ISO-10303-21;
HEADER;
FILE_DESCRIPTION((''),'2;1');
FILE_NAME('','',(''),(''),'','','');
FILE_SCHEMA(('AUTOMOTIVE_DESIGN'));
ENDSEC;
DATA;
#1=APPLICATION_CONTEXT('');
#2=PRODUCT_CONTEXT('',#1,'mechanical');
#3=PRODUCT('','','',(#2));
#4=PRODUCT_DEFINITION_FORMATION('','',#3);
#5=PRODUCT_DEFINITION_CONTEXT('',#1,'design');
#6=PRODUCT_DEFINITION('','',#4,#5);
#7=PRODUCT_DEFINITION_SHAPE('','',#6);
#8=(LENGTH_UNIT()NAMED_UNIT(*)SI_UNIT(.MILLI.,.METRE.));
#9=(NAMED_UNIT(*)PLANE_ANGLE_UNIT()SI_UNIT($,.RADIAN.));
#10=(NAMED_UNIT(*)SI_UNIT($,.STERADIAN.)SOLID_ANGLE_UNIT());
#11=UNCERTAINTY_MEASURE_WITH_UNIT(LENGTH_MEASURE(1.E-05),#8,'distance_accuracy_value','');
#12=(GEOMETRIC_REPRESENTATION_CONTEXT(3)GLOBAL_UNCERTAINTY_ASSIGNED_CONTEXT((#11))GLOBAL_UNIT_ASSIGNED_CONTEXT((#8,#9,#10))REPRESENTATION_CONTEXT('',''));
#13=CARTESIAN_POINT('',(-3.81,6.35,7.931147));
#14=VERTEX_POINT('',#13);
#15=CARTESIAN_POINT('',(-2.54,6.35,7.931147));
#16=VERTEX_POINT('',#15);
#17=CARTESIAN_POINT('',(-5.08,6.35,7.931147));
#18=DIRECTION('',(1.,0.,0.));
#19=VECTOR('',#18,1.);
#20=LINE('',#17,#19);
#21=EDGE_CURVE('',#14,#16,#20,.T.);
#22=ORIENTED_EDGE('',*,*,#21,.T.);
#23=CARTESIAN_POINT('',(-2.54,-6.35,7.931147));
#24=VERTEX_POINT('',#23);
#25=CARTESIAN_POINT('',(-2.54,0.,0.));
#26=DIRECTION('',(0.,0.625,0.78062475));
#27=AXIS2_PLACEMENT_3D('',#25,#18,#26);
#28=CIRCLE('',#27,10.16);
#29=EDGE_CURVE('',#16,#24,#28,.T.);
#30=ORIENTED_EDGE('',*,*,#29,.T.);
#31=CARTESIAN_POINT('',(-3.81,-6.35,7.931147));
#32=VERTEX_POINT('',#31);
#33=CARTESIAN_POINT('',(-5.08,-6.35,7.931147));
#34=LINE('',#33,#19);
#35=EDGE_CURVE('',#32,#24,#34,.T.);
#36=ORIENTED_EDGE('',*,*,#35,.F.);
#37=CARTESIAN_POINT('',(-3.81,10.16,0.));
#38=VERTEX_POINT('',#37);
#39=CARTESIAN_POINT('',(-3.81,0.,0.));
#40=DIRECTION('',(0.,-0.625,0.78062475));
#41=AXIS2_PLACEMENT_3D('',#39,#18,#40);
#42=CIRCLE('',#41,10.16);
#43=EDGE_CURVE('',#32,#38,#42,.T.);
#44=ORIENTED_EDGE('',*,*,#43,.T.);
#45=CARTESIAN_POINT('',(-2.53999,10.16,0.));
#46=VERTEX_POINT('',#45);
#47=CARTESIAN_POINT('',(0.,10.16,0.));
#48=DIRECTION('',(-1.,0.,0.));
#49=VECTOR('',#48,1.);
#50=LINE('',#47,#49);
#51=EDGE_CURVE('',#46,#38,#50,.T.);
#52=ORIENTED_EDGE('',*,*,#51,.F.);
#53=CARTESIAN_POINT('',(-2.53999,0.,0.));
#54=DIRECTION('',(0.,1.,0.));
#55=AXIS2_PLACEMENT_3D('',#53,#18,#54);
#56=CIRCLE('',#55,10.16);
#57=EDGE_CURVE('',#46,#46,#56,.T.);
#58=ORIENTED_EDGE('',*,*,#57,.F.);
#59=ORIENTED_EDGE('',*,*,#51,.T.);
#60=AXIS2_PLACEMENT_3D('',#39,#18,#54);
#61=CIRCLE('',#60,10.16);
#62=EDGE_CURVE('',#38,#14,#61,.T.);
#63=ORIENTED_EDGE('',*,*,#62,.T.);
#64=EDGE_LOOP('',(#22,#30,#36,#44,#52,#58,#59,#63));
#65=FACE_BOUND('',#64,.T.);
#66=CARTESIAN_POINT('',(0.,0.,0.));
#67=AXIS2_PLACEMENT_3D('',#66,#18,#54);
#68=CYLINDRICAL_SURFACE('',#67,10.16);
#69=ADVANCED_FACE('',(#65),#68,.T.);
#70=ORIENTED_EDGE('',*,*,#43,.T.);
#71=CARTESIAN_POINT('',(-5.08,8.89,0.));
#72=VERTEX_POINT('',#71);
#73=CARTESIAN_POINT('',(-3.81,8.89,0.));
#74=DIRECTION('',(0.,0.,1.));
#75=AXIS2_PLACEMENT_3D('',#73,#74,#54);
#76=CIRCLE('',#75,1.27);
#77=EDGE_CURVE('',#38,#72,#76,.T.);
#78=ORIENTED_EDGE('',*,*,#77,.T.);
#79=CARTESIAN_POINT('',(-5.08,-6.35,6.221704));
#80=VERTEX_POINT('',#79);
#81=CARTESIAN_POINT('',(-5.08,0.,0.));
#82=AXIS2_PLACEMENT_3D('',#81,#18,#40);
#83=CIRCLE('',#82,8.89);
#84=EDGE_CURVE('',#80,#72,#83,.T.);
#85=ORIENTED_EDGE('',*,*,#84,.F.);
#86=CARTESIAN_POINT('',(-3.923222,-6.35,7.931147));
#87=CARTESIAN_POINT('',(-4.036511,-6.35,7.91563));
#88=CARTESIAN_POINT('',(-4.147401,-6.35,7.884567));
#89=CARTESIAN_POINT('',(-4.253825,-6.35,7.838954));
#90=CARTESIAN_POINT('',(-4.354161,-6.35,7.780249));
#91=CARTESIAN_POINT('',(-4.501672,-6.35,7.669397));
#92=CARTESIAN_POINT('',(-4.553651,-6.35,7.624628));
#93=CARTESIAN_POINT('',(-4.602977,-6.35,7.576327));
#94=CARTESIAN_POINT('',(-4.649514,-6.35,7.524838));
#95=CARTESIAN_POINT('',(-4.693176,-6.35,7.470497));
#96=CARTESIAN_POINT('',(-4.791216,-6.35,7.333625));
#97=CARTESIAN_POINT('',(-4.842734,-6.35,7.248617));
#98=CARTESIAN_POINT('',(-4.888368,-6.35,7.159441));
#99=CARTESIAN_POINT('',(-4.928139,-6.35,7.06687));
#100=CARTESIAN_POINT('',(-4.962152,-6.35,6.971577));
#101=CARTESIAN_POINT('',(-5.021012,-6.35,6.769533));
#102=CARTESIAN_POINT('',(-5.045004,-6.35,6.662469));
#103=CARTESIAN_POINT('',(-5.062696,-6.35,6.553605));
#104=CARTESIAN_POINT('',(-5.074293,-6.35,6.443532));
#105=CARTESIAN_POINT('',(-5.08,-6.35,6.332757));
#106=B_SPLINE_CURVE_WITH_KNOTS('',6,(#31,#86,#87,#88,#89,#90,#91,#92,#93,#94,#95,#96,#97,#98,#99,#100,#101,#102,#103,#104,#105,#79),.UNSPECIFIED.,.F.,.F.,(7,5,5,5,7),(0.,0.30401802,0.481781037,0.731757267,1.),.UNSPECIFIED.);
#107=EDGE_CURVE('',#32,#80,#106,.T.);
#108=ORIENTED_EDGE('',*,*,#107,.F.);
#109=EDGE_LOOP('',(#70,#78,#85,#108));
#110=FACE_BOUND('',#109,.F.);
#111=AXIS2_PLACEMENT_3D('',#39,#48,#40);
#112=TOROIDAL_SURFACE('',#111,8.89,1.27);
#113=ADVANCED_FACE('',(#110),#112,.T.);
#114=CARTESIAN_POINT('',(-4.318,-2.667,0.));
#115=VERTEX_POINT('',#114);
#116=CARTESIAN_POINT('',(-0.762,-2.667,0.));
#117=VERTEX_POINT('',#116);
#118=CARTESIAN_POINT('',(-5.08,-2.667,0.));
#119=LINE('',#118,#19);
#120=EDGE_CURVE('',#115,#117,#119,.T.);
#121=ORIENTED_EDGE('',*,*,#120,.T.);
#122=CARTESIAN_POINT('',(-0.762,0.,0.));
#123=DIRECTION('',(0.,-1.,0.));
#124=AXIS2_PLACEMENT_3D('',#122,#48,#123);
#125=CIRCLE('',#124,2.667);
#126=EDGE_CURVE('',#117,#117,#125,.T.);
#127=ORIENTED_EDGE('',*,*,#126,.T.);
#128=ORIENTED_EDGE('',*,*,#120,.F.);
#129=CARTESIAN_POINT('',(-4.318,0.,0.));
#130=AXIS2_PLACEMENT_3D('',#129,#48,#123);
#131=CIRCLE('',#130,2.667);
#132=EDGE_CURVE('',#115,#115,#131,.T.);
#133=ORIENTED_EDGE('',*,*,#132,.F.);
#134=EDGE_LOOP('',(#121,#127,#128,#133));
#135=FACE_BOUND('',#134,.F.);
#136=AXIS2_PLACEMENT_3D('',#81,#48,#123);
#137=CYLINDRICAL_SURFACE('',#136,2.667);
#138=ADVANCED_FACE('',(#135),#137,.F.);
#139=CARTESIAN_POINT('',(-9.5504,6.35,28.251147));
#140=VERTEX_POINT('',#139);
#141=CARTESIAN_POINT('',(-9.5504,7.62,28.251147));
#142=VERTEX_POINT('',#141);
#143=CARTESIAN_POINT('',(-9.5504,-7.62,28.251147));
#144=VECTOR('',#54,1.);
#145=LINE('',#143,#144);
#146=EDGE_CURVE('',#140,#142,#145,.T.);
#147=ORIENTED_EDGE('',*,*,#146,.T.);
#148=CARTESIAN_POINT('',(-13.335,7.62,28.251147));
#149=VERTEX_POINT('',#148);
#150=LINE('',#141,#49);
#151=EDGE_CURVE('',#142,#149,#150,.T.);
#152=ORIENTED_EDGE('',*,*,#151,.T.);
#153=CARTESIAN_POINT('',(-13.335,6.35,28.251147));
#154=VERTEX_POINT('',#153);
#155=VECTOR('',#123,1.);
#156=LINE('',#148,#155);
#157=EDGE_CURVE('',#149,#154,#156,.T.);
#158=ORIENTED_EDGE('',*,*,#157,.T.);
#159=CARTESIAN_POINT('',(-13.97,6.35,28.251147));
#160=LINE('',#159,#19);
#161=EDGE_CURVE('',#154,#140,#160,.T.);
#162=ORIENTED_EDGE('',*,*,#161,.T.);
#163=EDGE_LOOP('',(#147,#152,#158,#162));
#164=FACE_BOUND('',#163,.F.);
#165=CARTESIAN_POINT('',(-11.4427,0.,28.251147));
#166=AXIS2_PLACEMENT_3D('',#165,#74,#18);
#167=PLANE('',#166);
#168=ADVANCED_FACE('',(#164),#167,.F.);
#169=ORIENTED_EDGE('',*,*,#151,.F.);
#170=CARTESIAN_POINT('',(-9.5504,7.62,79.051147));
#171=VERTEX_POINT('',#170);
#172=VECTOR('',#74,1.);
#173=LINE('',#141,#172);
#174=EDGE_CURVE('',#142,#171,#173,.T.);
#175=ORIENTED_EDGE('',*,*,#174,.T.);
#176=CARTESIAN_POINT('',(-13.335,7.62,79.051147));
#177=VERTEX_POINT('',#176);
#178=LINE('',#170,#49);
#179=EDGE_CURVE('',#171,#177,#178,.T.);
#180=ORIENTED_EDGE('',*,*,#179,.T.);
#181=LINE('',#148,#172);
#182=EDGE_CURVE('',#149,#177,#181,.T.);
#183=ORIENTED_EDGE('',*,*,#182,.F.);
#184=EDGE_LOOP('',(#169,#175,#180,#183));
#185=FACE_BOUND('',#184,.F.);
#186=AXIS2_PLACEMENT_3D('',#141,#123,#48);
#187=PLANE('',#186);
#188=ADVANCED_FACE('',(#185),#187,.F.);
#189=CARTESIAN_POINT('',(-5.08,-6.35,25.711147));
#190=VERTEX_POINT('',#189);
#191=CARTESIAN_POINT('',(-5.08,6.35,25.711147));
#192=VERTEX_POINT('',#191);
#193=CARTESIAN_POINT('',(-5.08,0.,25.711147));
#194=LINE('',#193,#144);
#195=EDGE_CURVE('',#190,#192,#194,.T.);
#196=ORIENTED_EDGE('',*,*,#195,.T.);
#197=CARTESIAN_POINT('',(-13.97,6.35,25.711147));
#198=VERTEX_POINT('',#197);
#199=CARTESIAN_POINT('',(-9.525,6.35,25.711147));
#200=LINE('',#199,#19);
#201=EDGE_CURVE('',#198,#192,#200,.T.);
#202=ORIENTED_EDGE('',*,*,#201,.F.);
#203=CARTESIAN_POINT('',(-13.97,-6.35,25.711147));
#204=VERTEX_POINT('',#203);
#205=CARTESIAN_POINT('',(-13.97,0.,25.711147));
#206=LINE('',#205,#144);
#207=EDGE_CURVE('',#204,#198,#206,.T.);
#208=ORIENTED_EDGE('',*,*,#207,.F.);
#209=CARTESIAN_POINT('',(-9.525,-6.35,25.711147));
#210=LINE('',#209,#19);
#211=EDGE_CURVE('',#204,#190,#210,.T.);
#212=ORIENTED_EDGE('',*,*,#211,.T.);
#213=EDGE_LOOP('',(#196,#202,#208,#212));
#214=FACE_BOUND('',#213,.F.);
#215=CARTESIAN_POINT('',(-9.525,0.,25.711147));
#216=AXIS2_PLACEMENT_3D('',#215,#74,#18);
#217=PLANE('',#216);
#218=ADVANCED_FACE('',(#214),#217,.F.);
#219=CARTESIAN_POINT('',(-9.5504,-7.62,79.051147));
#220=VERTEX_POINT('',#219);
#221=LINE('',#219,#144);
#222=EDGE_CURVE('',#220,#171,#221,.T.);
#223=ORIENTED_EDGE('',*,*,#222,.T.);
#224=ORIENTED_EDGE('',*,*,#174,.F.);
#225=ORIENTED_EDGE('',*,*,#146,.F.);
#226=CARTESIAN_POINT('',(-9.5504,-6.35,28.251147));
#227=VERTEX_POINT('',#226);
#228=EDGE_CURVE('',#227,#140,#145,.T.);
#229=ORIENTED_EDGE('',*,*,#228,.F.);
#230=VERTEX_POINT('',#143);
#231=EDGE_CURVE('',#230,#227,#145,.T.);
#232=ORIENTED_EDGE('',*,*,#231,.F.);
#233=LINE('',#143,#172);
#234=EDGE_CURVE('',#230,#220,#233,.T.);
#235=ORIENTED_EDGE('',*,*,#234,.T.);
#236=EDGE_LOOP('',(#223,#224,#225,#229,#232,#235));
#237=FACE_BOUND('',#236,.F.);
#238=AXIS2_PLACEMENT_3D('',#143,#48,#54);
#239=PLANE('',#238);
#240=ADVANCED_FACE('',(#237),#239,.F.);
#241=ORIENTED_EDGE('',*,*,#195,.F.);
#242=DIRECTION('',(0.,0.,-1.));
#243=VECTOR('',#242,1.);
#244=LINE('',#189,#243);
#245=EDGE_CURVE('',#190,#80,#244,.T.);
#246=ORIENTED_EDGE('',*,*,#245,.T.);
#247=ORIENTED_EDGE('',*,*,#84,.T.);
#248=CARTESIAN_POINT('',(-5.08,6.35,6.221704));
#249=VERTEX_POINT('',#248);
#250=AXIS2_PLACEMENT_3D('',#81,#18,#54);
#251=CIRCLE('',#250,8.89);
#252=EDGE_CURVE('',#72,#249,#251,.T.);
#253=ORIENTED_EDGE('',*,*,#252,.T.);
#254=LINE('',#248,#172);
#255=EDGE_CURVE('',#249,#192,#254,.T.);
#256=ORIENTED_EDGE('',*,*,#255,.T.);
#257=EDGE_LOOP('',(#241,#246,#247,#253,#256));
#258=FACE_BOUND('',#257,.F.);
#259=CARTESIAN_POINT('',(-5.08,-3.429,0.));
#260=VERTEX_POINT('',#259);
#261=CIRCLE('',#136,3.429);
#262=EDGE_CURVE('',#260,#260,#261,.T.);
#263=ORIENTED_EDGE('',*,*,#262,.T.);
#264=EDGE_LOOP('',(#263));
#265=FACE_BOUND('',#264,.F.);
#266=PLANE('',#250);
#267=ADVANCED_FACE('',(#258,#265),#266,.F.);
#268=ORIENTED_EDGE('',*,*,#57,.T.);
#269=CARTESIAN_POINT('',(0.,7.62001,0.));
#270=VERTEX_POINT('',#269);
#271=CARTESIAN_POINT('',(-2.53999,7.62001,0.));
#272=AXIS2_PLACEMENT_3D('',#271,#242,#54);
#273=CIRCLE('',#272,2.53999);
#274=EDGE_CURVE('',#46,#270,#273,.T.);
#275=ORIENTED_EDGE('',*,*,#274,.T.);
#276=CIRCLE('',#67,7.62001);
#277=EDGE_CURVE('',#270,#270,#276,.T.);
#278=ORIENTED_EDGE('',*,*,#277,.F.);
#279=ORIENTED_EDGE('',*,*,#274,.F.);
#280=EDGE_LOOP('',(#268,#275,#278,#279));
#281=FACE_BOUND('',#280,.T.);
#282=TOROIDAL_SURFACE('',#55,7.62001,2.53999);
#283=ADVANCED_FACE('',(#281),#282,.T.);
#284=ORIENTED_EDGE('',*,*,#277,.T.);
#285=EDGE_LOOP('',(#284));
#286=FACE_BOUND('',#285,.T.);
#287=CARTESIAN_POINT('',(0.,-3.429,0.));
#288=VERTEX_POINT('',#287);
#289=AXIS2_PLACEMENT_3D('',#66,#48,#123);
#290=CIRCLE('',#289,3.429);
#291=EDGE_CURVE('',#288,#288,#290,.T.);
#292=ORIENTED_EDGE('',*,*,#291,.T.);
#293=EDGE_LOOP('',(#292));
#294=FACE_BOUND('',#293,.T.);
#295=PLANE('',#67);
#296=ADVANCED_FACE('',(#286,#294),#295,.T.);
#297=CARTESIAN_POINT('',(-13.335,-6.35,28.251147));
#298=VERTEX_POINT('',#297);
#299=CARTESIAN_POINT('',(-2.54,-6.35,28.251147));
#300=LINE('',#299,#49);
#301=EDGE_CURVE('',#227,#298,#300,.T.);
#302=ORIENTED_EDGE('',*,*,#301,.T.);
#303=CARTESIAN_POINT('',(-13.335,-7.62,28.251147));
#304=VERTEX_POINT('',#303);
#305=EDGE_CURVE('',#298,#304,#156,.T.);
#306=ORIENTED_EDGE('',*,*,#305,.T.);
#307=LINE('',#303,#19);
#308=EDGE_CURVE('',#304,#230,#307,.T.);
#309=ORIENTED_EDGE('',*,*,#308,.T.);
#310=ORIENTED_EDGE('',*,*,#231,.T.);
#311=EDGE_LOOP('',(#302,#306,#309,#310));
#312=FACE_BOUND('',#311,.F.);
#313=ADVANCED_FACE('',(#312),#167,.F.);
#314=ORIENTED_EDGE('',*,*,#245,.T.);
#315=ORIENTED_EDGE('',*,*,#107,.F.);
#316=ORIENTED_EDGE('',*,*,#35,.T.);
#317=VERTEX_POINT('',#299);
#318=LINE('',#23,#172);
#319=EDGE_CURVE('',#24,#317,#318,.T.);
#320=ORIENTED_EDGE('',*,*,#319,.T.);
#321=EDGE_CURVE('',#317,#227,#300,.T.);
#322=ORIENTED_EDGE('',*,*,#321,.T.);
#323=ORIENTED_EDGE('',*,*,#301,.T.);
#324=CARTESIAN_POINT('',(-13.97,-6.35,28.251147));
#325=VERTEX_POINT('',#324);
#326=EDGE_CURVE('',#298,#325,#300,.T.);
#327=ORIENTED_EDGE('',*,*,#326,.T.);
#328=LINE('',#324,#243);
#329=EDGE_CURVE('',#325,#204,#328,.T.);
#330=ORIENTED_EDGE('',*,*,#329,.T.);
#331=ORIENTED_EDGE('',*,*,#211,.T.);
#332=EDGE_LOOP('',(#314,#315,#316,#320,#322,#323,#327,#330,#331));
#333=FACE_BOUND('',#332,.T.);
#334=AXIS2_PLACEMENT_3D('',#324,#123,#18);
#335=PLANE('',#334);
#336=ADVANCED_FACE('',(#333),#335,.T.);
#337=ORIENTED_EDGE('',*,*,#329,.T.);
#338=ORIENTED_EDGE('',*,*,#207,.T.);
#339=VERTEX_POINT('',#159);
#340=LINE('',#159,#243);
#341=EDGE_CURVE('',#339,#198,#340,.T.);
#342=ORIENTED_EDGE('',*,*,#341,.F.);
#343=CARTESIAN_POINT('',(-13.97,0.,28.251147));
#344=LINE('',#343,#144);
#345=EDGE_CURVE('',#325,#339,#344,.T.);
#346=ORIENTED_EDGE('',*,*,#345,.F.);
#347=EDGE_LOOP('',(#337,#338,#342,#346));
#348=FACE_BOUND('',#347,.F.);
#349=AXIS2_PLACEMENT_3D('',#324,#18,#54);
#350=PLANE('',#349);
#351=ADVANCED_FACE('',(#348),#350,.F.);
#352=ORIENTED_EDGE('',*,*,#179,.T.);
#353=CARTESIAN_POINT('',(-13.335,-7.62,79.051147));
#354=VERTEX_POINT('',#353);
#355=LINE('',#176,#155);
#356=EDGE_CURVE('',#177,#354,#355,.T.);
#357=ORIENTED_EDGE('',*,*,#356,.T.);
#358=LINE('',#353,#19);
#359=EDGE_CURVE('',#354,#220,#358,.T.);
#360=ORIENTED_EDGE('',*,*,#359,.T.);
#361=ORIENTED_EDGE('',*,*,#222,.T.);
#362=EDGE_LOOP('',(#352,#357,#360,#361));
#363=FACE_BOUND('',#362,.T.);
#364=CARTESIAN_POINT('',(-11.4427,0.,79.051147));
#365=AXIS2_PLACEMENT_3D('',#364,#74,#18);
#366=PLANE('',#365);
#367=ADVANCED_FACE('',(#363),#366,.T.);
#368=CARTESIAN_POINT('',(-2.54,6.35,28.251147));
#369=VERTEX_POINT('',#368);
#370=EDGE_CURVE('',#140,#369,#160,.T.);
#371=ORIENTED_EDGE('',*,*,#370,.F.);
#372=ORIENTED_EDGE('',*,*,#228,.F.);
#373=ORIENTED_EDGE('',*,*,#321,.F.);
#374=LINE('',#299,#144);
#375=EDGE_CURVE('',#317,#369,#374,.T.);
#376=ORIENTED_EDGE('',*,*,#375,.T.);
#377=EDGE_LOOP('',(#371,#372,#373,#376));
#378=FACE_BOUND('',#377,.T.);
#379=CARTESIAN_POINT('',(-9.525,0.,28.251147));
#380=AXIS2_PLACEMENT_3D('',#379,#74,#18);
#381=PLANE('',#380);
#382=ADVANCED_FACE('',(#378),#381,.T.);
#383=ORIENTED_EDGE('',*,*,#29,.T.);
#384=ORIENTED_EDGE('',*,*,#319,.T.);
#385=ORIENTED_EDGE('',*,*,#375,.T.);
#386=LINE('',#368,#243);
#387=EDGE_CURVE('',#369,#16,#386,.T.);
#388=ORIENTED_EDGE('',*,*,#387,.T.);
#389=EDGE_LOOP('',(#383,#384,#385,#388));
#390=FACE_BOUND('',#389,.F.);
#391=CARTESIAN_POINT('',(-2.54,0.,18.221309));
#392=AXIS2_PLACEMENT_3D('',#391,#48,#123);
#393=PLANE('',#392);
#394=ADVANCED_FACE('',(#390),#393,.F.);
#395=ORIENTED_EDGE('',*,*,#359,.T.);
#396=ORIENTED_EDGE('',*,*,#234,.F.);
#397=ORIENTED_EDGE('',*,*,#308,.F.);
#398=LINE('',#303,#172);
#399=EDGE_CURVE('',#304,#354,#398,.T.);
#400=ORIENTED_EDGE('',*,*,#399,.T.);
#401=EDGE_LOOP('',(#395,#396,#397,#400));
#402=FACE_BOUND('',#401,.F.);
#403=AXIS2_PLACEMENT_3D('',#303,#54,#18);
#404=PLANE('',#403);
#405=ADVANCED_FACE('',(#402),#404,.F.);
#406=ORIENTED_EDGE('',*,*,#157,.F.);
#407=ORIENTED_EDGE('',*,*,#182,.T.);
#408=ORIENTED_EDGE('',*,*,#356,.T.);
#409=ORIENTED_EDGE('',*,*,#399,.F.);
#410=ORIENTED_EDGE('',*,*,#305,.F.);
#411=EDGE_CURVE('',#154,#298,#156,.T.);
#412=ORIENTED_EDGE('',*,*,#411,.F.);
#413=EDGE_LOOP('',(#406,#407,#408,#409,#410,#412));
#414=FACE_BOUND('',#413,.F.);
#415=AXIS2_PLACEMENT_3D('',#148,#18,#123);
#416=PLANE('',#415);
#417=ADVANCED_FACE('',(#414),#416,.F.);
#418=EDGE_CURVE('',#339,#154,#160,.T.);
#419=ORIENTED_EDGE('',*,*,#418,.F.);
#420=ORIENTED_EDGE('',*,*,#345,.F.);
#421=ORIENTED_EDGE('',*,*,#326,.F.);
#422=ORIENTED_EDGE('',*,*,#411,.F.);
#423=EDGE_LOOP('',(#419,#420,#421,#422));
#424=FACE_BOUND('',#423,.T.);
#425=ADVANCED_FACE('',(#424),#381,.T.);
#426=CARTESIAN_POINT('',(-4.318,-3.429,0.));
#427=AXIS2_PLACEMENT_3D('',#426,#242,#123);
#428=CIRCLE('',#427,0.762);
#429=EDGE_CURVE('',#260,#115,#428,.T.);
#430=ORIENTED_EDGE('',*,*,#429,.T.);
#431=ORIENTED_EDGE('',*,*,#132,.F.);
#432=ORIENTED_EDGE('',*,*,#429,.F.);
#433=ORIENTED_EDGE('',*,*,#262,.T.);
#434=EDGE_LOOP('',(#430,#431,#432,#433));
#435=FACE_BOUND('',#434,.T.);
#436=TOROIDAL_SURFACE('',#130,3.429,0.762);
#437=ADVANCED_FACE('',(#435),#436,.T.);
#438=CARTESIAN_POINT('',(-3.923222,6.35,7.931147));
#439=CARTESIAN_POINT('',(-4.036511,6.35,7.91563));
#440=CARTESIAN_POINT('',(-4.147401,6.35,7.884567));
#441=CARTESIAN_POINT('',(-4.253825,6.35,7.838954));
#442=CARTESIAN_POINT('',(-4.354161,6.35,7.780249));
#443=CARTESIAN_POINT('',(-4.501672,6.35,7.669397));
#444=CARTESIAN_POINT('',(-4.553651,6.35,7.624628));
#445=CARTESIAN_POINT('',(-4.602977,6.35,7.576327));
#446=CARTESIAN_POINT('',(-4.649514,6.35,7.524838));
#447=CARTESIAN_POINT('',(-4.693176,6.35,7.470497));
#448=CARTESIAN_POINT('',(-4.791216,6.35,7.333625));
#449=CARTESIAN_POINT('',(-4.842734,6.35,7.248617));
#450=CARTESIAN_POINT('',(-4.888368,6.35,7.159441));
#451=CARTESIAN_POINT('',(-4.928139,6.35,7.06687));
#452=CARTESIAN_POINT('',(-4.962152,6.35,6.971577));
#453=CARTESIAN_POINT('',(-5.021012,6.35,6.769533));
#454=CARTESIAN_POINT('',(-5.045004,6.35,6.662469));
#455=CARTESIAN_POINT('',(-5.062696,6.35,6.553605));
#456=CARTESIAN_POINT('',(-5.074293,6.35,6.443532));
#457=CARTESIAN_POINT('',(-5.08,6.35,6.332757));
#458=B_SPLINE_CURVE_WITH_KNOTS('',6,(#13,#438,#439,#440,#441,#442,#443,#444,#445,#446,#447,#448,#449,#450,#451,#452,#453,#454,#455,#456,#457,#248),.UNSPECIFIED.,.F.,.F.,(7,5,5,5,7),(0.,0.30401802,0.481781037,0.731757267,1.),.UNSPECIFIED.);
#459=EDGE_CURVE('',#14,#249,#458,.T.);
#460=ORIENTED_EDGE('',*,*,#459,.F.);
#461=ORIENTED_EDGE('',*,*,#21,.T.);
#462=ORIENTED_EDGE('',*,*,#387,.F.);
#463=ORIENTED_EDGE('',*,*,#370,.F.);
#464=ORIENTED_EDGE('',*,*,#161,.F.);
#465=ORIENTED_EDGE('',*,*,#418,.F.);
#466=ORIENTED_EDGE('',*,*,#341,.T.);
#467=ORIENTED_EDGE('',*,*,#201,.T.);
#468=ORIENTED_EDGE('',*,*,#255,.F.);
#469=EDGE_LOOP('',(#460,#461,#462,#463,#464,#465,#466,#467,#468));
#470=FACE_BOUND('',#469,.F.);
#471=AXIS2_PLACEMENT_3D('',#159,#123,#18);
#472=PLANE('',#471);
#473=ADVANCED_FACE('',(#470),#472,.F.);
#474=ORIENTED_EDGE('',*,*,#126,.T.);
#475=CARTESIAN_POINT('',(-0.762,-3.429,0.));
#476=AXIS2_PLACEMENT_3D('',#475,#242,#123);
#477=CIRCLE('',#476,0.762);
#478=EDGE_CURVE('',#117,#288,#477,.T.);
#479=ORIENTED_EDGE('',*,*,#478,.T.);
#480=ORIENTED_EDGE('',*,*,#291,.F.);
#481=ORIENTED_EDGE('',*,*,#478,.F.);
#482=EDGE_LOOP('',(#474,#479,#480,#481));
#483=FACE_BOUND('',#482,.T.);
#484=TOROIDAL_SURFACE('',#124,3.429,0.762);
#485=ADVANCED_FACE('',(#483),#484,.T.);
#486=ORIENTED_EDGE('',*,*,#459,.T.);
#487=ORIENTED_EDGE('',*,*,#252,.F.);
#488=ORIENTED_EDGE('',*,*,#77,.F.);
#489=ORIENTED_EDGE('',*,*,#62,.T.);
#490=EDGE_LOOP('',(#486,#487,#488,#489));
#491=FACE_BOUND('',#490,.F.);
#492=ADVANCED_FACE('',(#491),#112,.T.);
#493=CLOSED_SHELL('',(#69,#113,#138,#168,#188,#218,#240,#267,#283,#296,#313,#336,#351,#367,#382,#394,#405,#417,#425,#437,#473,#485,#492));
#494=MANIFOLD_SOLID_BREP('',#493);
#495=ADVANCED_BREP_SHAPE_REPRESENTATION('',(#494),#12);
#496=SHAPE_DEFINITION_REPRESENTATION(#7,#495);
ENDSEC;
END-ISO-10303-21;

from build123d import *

# Parameters (mm, degrees)
F0_R      = 10.16
F1_DEPTH  = 2.54
F2_R      = 2.667
F3_DEPTH  = 26.02296
F4_R      = 10.16
F5_DEPTH  = 5.08
F7_R      = 2.667
F8_DEPTH  = 61.29661
F9_DEPTH  = 2.54
F10_W     = 8.89
F10_H     = 12.7
F11_DEPTH = 2.54
F13_DEPTH = 50.8
F14_R     = 2.53999
F15_R     = 1.27
F16_R     = 0.762


# Not quite as in the source:
# - a fillet or chamfer is up to 0.001 mm smaller than in the source, because OpenCascade refuses the exact size


with BuildPart() as f1:
    # F0 (on Right) → F1 (new body)
    with BuildSketch(Plane.YZ):
        Circle(F0_R)
    extrude(amount=-F1_DEPTH)

    # F2 (on face) → F3 (cut)
    with BuildSketch(Plane(origin=(-2.54, 0, 0), x_dir=(0, -1, 0), z_dir=(-1, 0, 0))):
        Circle(F2_R)
    extrude(amount=-F3_DEPTH, mode=Mode.SUBTRACT)

    # F4 (on Right) → F5 (join)
    with BuildSketch(Plane.YZ):
        Circle(F4_R)
    extrude(amount=-F5_DEPTH)

    # F7 (on face) → F8 (cut)
    with BuildSketch(Plane(origin=(-5.08, 0, 0), x_dir=(0, -1, 0), z_dir=(-1, 0, 0))):
        Circle(F7_R)
    extrude(amount=-F8_DEPTH, mode=Mode.SUBTRACT)

    # F6 (on face) → F9 (join)
    with BuildSketch(Plane(origin=(-5.08, 0, 0), x_dir=(0, -1, 0), z_dir=(-1, 0, 0))):
        with BuildLine():
            Line((-6.35, 28.251147458), (-6.35, 7.931147458))
            ThreePointArc((-6.35, 7.931147458), (0, 10.16), (6.35, 7.931147458))
            Line((6.35, 7.931147458), (6.35, 28.251147458))
            Line((6.35, 28.251147458), (-6.35, 28.251147458))
        make_face()
    extrude(amount=-F9_DEPTH)

    # F10 (on face) → F11 (join)
    with BuildSketch(Plane.XY.offset(28.251147458)):
        with Locations((-9.525, 0)):
            Rectangle(F10_W, F10_H)
    extrude(amount=-F11_DEPTH)

    # F12 (on face) → F13 (join)
    with BuildSketch(Plane.XY.offset(28.251147458)):
        Polygon((-9.5504, 7.62), (-13.335, 7.62), (-13.335, -7.62), (-9.5504, -7.62), (-9.5504, 0), align=None)
    extrude(amount=F13_DEPTH)

    # F14 (radius 2.54 in the source; OpenCascade refuses exactly that, so slightly less here)
    f14_edges = [f1.edges().sort_by_distance(p)[0] for p in [
        (0, -10.16, 0),
    ]]
    fillet(f14_edges, radius=F14_R)

    # F15
    f15_edges = [f1.edges().sort_by_distance(p)[0] for p in [
        (-5.08, -4.399409, -9.1581),
    ]]
    fillet(f15_edges, radius=F15_R)

    # F16
    f16_edges = [f1.edges().sort_by_distance(p)[0] for p in [
        (-5.08, 2.667, 0),
        (0, 2.667, 0),
    ]]
    fillet(f16_edges, radius=F16_R)


solid = f1.part
